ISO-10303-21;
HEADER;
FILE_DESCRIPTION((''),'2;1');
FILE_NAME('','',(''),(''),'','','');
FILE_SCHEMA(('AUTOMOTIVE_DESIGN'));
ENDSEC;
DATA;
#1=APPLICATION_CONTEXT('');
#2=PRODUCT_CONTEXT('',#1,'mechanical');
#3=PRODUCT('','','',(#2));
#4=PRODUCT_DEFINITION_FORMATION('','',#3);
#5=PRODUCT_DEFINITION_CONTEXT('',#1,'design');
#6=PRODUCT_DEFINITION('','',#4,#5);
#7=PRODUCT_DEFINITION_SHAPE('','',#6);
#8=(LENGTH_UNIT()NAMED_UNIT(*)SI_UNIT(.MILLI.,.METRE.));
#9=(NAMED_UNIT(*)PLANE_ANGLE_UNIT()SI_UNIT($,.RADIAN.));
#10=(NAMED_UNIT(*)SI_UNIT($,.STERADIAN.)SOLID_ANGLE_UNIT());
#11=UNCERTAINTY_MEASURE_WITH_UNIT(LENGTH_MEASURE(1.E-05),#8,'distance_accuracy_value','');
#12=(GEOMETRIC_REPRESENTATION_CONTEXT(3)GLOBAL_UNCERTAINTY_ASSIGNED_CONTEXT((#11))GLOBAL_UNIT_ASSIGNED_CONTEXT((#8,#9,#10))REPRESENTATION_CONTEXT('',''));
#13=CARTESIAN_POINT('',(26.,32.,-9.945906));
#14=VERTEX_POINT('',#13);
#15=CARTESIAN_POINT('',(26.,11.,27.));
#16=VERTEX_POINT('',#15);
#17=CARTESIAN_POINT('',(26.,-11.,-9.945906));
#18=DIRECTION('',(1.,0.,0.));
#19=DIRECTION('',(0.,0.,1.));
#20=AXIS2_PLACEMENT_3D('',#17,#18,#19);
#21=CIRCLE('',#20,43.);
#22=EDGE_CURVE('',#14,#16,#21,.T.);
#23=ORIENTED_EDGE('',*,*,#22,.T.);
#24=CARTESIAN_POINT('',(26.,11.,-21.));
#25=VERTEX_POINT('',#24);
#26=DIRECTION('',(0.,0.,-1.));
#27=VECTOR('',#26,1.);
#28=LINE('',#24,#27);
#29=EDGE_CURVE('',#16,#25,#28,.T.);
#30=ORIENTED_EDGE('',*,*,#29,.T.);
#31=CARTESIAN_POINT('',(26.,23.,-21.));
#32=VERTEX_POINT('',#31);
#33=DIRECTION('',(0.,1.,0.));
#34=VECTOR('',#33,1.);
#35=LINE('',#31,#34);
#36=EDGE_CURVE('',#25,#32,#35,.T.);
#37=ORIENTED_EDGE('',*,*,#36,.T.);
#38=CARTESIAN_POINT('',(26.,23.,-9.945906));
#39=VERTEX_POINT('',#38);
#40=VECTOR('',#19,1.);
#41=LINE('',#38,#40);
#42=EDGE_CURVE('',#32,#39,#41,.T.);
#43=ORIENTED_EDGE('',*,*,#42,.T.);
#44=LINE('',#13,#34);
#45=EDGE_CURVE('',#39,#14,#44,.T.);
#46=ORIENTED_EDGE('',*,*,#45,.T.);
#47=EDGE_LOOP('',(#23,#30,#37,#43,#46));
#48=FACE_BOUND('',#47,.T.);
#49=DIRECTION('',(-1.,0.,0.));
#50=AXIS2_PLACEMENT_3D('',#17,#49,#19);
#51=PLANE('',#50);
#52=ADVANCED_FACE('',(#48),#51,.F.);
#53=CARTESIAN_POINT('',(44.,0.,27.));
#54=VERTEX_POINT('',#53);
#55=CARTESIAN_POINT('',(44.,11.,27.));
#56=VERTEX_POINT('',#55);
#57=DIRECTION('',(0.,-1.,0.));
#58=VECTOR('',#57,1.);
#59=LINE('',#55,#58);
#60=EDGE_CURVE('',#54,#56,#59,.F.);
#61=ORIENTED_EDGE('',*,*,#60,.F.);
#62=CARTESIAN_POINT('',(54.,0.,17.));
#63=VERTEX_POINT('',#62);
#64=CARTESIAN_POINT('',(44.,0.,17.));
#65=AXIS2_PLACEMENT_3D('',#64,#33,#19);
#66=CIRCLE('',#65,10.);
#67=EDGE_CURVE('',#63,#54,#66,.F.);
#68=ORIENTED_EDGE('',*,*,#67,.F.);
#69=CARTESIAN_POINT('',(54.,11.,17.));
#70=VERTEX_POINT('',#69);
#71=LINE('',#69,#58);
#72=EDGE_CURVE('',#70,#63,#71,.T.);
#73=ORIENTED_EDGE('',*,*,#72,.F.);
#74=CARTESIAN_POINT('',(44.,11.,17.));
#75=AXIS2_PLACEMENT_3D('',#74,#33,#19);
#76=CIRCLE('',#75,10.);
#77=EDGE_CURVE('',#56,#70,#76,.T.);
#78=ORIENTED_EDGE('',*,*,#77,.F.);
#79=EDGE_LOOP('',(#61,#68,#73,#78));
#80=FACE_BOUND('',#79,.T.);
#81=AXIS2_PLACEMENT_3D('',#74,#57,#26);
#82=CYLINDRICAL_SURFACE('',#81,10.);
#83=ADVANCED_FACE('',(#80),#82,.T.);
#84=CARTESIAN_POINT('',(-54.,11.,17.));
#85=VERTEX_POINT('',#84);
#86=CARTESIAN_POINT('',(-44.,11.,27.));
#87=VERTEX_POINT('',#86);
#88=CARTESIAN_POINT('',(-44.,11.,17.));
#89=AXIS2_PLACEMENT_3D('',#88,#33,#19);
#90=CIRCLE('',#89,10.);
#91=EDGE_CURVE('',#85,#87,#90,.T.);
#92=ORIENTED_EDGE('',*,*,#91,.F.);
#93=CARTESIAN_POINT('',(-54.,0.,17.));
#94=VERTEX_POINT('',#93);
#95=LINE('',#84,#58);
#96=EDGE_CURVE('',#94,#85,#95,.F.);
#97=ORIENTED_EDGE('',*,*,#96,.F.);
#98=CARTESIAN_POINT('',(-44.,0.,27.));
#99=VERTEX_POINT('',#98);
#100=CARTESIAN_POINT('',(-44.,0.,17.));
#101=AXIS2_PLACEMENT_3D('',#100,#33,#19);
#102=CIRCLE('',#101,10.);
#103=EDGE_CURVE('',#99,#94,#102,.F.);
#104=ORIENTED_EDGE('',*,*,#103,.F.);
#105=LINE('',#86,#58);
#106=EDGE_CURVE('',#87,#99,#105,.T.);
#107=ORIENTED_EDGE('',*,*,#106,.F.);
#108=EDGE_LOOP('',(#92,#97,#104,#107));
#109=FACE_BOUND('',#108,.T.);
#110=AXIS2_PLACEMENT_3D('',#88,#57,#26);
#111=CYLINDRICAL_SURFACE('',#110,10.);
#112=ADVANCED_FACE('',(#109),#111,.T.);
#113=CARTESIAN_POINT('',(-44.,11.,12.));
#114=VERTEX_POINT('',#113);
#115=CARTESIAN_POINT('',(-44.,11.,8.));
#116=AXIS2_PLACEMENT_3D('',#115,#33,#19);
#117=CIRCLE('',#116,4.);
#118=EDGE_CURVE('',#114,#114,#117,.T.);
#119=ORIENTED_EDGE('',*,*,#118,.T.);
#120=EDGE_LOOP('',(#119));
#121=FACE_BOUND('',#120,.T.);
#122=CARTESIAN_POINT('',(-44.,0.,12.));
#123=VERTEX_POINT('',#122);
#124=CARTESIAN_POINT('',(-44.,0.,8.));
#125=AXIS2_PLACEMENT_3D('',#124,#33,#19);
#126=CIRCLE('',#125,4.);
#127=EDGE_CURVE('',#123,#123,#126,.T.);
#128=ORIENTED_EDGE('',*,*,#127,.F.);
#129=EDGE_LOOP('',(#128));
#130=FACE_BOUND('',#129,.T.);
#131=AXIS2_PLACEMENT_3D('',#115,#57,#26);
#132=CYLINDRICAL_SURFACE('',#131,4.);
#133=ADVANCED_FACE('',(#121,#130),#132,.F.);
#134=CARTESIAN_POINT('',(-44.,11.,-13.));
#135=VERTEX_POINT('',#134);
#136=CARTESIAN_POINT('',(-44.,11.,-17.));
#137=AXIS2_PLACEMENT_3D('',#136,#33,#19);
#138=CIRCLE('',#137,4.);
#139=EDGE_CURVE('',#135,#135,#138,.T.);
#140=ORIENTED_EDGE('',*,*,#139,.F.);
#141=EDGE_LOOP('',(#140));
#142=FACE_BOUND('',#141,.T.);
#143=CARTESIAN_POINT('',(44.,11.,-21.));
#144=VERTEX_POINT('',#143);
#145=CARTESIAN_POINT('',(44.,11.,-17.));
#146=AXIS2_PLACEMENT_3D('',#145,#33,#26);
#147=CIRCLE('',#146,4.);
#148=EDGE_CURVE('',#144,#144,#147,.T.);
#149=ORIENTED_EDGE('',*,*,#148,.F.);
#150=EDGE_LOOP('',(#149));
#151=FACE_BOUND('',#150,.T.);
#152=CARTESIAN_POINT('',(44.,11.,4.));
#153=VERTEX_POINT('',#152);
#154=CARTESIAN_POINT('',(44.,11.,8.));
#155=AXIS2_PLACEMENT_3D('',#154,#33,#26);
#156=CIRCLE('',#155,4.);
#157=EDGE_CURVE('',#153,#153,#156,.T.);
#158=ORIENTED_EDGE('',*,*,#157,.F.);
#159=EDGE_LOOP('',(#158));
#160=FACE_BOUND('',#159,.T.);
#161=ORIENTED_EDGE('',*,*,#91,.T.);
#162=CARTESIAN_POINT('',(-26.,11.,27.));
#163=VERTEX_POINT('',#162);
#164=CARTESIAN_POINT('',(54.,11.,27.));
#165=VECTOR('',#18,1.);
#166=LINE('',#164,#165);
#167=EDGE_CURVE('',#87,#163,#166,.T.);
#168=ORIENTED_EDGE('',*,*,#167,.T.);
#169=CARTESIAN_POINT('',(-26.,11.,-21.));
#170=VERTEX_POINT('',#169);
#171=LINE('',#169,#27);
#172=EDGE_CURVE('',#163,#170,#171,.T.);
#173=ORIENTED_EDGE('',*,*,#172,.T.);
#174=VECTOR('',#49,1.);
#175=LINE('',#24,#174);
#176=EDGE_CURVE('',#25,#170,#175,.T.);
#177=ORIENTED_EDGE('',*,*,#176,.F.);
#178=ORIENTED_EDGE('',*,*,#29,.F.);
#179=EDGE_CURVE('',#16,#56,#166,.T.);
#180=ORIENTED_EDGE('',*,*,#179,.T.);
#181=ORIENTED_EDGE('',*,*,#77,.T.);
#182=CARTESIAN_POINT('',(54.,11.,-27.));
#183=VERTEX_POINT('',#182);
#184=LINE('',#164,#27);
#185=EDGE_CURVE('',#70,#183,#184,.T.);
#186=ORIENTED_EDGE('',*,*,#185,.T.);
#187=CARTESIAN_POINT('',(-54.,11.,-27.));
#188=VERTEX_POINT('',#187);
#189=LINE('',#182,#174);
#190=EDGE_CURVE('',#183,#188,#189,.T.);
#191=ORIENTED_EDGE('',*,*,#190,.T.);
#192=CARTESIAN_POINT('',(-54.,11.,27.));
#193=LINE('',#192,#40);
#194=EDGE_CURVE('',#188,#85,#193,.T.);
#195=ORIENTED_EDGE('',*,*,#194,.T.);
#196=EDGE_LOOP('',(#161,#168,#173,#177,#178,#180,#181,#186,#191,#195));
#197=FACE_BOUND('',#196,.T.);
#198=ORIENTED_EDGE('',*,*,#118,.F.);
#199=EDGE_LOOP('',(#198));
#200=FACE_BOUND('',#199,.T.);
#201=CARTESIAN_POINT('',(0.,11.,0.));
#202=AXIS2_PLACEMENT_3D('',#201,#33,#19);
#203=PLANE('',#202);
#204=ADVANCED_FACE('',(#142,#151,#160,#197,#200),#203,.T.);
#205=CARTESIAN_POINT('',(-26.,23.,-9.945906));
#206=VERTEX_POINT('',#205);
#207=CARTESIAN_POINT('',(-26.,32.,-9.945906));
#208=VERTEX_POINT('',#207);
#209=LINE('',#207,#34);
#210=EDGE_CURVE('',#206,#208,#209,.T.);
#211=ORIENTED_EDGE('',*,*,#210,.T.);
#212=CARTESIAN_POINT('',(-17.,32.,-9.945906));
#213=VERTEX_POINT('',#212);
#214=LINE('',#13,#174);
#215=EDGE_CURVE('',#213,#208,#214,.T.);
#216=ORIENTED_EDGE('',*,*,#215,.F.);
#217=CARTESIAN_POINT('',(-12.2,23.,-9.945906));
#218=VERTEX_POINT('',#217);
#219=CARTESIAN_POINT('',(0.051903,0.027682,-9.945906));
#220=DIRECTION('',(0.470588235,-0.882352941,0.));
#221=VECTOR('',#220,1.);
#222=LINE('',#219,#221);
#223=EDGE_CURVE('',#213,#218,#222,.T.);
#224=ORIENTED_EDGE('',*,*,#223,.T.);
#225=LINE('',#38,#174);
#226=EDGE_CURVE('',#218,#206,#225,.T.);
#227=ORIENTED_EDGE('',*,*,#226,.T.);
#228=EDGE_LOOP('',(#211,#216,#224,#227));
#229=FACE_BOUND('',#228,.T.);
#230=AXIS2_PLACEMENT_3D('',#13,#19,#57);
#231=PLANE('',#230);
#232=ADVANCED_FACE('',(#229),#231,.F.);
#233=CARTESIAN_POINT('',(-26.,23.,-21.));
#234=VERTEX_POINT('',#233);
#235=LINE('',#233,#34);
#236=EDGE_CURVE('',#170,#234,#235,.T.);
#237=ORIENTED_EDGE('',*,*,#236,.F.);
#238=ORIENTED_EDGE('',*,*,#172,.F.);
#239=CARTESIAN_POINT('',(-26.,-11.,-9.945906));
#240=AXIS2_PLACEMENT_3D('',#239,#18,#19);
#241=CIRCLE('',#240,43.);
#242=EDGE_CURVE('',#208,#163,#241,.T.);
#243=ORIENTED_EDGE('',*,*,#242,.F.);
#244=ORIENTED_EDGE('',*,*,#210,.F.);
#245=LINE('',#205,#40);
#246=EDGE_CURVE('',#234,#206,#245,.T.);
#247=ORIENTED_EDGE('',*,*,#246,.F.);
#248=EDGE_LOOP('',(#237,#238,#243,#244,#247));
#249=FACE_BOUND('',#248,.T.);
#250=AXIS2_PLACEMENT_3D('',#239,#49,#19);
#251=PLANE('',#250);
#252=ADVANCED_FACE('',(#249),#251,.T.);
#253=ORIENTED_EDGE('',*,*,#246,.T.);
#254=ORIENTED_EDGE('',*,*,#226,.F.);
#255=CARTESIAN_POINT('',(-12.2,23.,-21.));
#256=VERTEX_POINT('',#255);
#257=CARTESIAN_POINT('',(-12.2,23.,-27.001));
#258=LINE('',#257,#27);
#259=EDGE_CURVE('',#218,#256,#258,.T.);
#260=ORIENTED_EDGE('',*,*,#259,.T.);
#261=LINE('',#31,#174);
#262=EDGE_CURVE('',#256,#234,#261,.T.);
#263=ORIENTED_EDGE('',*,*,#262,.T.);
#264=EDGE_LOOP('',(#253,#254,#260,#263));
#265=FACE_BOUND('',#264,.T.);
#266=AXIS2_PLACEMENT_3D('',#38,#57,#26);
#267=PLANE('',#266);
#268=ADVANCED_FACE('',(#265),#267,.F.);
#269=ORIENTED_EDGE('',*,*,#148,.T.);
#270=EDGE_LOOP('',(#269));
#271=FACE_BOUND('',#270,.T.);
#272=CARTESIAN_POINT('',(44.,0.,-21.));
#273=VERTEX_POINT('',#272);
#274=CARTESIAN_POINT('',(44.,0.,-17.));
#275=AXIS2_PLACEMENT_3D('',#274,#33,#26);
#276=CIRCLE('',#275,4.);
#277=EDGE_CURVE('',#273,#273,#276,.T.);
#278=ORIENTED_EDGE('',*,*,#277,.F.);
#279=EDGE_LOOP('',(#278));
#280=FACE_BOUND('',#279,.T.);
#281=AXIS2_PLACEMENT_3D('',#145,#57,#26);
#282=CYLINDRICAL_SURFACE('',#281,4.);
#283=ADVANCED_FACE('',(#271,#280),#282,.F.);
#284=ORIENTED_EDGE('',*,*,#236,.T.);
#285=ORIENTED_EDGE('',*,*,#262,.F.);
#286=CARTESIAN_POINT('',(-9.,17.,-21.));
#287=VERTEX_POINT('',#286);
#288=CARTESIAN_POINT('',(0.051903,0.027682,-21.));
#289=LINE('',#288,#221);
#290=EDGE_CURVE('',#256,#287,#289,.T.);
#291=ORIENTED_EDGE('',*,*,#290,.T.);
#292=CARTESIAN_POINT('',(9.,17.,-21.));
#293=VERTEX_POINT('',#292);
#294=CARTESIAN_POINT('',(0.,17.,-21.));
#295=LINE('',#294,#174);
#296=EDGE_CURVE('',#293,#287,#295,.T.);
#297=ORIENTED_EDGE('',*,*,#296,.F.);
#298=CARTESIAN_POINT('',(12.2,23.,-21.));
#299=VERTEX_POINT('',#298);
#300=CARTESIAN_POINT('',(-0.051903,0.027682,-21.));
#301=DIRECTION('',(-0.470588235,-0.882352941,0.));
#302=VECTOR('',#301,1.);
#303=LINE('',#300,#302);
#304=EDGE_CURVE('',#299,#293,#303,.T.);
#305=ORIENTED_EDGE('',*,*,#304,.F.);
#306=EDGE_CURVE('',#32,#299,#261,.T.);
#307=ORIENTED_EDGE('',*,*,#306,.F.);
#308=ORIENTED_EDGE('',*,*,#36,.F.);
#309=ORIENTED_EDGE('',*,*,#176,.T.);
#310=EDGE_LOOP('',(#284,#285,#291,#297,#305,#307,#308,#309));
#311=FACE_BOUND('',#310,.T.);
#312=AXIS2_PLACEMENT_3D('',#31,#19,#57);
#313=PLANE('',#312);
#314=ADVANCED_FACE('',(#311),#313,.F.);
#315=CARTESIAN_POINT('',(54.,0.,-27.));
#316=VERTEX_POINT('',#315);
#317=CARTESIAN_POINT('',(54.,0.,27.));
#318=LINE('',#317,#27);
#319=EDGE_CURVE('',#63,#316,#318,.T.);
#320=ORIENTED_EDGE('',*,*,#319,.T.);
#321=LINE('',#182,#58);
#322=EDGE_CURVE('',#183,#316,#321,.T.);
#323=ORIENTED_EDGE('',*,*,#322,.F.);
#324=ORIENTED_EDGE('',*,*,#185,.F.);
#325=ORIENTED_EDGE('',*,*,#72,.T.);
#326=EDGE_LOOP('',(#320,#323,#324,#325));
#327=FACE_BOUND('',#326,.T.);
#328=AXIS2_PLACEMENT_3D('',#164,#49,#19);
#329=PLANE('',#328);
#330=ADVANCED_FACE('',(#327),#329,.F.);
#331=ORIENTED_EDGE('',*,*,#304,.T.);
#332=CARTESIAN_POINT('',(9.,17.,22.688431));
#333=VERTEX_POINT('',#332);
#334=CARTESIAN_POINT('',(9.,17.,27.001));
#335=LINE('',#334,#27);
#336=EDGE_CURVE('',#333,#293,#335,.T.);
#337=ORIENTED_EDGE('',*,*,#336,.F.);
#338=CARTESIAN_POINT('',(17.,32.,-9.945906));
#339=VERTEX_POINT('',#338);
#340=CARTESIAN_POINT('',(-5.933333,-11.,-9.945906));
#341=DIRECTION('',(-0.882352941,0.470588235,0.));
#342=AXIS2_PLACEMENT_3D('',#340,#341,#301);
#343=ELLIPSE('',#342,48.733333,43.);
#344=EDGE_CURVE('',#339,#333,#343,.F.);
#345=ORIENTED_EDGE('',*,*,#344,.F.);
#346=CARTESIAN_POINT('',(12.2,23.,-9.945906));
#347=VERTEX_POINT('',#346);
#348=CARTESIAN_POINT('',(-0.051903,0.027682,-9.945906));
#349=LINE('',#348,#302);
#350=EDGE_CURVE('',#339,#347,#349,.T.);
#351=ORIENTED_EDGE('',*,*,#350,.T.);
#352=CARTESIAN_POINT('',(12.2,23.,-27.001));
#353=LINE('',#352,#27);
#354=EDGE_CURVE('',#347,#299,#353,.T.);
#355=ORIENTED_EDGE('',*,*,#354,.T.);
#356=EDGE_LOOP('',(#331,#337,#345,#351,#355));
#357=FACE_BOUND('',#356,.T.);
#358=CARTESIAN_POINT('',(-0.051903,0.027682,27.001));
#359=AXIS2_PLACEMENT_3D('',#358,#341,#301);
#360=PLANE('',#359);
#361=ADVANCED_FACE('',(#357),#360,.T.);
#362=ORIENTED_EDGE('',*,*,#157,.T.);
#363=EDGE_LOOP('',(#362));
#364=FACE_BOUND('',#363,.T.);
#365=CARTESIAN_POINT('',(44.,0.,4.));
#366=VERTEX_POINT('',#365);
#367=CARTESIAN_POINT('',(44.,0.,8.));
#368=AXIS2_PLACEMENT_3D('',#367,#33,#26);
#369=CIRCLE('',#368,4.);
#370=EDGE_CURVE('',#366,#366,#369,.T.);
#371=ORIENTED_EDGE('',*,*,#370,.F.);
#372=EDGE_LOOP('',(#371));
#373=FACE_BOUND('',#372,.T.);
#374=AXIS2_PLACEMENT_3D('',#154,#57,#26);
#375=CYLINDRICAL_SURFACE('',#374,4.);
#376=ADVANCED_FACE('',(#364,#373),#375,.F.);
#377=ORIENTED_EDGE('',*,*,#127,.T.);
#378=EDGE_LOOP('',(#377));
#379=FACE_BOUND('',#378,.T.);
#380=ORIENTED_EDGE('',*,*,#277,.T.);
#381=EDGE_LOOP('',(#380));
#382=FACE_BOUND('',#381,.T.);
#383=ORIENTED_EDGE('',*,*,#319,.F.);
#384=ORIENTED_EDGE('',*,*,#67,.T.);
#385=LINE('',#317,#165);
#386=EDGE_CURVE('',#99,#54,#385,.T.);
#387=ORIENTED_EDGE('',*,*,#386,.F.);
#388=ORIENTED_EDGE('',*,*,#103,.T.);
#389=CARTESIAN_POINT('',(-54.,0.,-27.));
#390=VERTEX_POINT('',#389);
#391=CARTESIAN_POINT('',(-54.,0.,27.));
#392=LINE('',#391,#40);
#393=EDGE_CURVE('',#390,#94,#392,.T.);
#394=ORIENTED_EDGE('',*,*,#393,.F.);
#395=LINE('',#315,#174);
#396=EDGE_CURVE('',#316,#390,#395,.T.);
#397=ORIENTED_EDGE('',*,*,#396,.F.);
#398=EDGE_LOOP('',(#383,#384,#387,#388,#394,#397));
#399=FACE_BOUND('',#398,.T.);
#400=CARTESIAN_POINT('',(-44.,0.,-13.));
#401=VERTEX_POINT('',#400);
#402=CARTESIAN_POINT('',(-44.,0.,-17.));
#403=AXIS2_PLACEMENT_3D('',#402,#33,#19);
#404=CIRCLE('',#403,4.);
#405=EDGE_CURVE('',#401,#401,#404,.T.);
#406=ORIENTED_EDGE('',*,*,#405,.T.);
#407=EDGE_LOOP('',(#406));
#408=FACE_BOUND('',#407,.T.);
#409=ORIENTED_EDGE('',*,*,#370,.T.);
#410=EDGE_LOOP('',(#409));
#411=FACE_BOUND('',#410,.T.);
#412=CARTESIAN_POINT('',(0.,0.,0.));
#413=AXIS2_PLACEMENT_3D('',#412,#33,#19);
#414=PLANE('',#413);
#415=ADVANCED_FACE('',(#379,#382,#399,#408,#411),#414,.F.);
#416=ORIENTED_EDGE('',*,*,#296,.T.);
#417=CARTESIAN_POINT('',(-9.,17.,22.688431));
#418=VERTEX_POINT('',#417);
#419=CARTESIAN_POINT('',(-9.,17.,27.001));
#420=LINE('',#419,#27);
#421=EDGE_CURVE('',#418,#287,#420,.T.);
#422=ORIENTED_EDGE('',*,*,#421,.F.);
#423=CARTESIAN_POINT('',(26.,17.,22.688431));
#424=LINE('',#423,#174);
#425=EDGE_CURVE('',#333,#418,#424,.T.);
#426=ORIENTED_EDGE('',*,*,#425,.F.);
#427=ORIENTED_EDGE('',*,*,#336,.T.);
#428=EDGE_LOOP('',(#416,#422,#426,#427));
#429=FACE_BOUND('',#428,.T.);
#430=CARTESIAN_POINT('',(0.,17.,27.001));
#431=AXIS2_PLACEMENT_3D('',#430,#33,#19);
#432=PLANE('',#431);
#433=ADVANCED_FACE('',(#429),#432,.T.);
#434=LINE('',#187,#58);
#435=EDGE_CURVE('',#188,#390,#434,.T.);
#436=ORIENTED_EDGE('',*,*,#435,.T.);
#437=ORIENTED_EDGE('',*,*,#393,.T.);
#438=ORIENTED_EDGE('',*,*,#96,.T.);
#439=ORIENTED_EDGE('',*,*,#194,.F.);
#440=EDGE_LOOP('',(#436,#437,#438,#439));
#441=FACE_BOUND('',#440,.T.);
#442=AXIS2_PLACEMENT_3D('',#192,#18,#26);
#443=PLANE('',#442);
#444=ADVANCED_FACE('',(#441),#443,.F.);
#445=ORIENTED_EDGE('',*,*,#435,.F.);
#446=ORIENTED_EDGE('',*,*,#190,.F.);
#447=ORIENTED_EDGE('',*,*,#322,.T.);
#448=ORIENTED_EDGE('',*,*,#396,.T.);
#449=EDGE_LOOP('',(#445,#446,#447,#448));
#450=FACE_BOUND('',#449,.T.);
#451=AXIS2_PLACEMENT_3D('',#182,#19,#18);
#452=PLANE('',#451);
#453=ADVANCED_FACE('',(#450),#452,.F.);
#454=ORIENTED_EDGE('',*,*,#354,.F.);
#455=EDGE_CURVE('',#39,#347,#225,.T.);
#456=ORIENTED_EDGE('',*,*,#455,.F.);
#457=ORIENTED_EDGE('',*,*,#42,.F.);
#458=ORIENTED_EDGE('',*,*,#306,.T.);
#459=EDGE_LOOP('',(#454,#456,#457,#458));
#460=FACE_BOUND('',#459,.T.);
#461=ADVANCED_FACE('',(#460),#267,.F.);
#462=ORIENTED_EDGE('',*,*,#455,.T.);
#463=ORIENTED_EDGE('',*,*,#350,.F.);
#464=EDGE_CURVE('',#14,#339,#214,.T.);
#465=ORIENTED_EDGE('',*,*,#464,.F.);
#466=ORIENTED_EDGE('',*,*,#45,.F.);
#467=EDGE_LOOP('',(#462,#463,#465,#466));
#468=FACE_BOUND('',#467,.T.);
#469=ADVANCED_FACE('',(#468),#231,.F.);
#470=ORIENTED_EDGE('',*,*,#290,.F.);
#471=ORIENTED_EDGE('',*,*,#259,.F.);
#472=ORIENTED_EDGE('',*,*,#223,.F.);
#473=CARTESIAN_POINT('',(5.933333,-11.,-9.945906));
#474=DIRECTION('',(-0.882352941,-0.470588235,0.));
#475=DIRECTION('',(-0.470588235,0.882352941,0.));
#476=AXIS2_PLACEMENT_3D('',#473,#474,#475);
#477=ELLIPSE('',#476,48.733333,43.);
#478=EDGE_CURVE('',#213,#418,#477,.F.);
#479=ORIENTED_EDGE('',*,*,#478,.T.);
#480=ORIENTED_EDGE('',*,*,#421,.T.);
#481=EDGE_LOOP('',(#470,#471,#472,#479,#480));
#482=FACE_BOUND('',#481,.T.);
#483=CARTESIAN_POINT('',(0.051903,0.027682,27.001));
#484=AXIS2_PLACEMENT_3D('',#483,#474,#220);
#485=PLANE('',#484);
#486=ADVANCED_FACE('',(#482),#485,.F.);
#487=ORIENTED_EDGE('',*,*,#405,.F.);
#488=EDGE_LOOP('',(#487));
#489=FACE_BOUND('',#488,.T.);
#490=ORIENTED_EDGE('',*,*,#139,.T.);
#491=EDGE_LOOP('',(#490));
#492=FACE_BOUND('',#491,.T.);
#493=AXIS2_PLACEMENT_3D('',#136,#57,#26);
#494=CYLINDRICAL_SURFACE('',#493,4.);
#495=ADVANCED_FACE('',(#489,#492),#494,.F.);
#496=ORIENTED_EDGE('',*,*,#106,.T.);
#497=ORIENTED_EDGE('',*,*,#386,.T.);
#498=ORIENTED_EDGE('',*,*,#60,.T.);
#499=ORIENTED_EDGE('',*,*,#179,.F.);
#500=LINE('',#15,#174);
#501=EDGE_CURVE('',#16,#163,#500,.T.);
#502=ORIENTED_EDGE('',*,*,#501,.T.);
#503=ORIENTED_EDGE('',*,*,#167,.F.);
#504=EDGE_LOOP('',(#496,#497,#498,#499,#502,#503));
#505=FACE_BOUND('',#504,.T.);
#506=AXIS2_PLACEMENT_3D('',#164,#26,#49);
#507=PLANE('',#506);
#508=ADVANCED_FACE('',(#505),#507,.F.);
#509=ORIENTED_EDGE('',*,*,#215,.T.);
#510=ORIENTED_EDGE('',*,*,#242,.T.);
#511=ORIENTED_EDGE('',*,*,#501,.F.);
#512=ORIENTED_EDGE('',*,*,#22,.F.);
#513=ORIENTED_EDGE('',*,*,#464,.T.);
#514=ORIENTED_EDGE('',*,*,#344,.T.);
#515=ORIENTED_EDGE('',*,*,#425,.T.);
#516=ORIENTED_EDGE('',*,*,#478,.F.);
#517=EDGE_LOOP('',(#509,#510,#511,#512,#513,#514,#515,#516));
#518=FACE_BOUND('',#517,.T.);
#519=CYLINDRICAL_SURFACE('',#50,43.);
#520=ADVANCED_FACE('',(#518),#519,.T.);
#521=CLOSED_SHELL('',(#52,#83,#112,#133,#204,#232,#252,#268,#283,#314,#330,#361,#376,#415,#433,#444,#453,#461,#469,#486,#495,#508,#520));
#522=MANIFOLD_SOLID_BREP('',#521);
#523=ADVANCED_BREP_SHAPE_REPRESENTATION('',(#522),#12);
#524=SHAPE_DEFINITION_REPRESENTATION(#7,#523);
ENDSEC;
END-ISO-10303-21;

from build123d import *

# Parameters (mm, degrees)
SKETCH1_W                      = 108
SKETCH1_H                      = 54
SKETCH1_R                      = 4
BOSS_EXTRUDE3_DEPTH            = 11
BOSS_EXTRUDE4_DEPTH            = 26
CUT_EXTRUDE1_REACH             = 70.33
CUT_EXTRUDE1_DIRECTION_2_REACH = 70.33
FILLET1_R                      = 10


with BuildPart() as part:
    # Sketch1 → Boss-Extrude3 (new body)
    with BuildSketch(Plane(origin=(0, 0, 0), x_dir=(1, 0, 0), z_dir=(0, 1, 0))):
        Rectangle(SKETCH1_W, SKETCH1_H)
        with Locations((-44, -8)):
            Circle(SKETCH1_R, mode=Mode.SUBTRACT)
        with Locations((-44, 17)):
            Circle(SKETCH1_R, mode=Mode.SUBTRACT)
        with Locations((44, 17)):
            Circle(SKETCH1_R, mode=Mode.SUBTRACT)
        with Locations((44, -8)):
            Circle(SKETCH1_R, mode=Mode.SUBTRACT)
    extrude(amount=BOSS_EXTRUDE3_DEPTH)

    # Sketch4 → Boss-Extrude4 (add, symmetric)
    with BuildSketch(Plane(origin=(0, 0, 0), x_dir=(0, 0, -1), z_dir=(1, 0, 0))):
        with BuildLine():
            Line((9.945906404, 32), (9.945906404, 23))
            Line((9.945906404, 23), (21, 23))
            Line((21, 23), (21, 11))
            Line((21, 11), (-27, 11))
            ThreePointArc((-27, 11), (-11.302622957, 26.383151285), (9.945906404, 32))
        make_face()
    extrude(amount=BOSS_EXTRUDE4_DEPTH, both=True)

    # Sketch5 → Cut-Extrude1 (cut, up to next)
    with BuildSketch(Plane.XY, mode=Mode.PRIVATE) as cut_extrude1_sk1:
        Polygon((-17, 32), (-9, 17), (9, 17), (17, 32), align=None)
    cut_extrude1_tool1 = extrude(cut_extrude1_sk1.sketch, amount=-CUT_EXTRUDE1_REACH, mode=Mode.PRIVATE) & part.part
    add(cut_extrude1_tool1.solids().sort_by_distance((0, 25.269231, 0))[0], mode=Mode.SUBTRACT)

    # Sketch5 → Cut-Extrude1 direction 2 (cut, up to next)
    with BuildSketch(Plane.XY, mode=Mode.PRIVATE) as cut_extrude1_direction_2_sk1:
        Polygon((-17, 32), (-9, 17), (9, 17), (17, 32), align=None)
    cut_extrude1_direction_2_tool1 = extrude(cut_extrude1_direction_2_sk1.sketch, amount=CUT_EXTRUDE1_DIRECTION_2_REACH, mode=Mode.PRIVATE) & part.part
    add(cut_extrude1_direction_2_tool1.solids().sort_by_distance((0, 25.269231, 0))[0], mode=Mode.SUBTRACT)

    # Fillet1
    fillet1_edges = [part.edges().sort_by_distance(p)[0] for p in [
        (-54, 5.5, 27),
        (54, 5.5, 27),
    ]]
    fillet(fillet1_edges, radius=FILLET1_R)


solid = part.part
